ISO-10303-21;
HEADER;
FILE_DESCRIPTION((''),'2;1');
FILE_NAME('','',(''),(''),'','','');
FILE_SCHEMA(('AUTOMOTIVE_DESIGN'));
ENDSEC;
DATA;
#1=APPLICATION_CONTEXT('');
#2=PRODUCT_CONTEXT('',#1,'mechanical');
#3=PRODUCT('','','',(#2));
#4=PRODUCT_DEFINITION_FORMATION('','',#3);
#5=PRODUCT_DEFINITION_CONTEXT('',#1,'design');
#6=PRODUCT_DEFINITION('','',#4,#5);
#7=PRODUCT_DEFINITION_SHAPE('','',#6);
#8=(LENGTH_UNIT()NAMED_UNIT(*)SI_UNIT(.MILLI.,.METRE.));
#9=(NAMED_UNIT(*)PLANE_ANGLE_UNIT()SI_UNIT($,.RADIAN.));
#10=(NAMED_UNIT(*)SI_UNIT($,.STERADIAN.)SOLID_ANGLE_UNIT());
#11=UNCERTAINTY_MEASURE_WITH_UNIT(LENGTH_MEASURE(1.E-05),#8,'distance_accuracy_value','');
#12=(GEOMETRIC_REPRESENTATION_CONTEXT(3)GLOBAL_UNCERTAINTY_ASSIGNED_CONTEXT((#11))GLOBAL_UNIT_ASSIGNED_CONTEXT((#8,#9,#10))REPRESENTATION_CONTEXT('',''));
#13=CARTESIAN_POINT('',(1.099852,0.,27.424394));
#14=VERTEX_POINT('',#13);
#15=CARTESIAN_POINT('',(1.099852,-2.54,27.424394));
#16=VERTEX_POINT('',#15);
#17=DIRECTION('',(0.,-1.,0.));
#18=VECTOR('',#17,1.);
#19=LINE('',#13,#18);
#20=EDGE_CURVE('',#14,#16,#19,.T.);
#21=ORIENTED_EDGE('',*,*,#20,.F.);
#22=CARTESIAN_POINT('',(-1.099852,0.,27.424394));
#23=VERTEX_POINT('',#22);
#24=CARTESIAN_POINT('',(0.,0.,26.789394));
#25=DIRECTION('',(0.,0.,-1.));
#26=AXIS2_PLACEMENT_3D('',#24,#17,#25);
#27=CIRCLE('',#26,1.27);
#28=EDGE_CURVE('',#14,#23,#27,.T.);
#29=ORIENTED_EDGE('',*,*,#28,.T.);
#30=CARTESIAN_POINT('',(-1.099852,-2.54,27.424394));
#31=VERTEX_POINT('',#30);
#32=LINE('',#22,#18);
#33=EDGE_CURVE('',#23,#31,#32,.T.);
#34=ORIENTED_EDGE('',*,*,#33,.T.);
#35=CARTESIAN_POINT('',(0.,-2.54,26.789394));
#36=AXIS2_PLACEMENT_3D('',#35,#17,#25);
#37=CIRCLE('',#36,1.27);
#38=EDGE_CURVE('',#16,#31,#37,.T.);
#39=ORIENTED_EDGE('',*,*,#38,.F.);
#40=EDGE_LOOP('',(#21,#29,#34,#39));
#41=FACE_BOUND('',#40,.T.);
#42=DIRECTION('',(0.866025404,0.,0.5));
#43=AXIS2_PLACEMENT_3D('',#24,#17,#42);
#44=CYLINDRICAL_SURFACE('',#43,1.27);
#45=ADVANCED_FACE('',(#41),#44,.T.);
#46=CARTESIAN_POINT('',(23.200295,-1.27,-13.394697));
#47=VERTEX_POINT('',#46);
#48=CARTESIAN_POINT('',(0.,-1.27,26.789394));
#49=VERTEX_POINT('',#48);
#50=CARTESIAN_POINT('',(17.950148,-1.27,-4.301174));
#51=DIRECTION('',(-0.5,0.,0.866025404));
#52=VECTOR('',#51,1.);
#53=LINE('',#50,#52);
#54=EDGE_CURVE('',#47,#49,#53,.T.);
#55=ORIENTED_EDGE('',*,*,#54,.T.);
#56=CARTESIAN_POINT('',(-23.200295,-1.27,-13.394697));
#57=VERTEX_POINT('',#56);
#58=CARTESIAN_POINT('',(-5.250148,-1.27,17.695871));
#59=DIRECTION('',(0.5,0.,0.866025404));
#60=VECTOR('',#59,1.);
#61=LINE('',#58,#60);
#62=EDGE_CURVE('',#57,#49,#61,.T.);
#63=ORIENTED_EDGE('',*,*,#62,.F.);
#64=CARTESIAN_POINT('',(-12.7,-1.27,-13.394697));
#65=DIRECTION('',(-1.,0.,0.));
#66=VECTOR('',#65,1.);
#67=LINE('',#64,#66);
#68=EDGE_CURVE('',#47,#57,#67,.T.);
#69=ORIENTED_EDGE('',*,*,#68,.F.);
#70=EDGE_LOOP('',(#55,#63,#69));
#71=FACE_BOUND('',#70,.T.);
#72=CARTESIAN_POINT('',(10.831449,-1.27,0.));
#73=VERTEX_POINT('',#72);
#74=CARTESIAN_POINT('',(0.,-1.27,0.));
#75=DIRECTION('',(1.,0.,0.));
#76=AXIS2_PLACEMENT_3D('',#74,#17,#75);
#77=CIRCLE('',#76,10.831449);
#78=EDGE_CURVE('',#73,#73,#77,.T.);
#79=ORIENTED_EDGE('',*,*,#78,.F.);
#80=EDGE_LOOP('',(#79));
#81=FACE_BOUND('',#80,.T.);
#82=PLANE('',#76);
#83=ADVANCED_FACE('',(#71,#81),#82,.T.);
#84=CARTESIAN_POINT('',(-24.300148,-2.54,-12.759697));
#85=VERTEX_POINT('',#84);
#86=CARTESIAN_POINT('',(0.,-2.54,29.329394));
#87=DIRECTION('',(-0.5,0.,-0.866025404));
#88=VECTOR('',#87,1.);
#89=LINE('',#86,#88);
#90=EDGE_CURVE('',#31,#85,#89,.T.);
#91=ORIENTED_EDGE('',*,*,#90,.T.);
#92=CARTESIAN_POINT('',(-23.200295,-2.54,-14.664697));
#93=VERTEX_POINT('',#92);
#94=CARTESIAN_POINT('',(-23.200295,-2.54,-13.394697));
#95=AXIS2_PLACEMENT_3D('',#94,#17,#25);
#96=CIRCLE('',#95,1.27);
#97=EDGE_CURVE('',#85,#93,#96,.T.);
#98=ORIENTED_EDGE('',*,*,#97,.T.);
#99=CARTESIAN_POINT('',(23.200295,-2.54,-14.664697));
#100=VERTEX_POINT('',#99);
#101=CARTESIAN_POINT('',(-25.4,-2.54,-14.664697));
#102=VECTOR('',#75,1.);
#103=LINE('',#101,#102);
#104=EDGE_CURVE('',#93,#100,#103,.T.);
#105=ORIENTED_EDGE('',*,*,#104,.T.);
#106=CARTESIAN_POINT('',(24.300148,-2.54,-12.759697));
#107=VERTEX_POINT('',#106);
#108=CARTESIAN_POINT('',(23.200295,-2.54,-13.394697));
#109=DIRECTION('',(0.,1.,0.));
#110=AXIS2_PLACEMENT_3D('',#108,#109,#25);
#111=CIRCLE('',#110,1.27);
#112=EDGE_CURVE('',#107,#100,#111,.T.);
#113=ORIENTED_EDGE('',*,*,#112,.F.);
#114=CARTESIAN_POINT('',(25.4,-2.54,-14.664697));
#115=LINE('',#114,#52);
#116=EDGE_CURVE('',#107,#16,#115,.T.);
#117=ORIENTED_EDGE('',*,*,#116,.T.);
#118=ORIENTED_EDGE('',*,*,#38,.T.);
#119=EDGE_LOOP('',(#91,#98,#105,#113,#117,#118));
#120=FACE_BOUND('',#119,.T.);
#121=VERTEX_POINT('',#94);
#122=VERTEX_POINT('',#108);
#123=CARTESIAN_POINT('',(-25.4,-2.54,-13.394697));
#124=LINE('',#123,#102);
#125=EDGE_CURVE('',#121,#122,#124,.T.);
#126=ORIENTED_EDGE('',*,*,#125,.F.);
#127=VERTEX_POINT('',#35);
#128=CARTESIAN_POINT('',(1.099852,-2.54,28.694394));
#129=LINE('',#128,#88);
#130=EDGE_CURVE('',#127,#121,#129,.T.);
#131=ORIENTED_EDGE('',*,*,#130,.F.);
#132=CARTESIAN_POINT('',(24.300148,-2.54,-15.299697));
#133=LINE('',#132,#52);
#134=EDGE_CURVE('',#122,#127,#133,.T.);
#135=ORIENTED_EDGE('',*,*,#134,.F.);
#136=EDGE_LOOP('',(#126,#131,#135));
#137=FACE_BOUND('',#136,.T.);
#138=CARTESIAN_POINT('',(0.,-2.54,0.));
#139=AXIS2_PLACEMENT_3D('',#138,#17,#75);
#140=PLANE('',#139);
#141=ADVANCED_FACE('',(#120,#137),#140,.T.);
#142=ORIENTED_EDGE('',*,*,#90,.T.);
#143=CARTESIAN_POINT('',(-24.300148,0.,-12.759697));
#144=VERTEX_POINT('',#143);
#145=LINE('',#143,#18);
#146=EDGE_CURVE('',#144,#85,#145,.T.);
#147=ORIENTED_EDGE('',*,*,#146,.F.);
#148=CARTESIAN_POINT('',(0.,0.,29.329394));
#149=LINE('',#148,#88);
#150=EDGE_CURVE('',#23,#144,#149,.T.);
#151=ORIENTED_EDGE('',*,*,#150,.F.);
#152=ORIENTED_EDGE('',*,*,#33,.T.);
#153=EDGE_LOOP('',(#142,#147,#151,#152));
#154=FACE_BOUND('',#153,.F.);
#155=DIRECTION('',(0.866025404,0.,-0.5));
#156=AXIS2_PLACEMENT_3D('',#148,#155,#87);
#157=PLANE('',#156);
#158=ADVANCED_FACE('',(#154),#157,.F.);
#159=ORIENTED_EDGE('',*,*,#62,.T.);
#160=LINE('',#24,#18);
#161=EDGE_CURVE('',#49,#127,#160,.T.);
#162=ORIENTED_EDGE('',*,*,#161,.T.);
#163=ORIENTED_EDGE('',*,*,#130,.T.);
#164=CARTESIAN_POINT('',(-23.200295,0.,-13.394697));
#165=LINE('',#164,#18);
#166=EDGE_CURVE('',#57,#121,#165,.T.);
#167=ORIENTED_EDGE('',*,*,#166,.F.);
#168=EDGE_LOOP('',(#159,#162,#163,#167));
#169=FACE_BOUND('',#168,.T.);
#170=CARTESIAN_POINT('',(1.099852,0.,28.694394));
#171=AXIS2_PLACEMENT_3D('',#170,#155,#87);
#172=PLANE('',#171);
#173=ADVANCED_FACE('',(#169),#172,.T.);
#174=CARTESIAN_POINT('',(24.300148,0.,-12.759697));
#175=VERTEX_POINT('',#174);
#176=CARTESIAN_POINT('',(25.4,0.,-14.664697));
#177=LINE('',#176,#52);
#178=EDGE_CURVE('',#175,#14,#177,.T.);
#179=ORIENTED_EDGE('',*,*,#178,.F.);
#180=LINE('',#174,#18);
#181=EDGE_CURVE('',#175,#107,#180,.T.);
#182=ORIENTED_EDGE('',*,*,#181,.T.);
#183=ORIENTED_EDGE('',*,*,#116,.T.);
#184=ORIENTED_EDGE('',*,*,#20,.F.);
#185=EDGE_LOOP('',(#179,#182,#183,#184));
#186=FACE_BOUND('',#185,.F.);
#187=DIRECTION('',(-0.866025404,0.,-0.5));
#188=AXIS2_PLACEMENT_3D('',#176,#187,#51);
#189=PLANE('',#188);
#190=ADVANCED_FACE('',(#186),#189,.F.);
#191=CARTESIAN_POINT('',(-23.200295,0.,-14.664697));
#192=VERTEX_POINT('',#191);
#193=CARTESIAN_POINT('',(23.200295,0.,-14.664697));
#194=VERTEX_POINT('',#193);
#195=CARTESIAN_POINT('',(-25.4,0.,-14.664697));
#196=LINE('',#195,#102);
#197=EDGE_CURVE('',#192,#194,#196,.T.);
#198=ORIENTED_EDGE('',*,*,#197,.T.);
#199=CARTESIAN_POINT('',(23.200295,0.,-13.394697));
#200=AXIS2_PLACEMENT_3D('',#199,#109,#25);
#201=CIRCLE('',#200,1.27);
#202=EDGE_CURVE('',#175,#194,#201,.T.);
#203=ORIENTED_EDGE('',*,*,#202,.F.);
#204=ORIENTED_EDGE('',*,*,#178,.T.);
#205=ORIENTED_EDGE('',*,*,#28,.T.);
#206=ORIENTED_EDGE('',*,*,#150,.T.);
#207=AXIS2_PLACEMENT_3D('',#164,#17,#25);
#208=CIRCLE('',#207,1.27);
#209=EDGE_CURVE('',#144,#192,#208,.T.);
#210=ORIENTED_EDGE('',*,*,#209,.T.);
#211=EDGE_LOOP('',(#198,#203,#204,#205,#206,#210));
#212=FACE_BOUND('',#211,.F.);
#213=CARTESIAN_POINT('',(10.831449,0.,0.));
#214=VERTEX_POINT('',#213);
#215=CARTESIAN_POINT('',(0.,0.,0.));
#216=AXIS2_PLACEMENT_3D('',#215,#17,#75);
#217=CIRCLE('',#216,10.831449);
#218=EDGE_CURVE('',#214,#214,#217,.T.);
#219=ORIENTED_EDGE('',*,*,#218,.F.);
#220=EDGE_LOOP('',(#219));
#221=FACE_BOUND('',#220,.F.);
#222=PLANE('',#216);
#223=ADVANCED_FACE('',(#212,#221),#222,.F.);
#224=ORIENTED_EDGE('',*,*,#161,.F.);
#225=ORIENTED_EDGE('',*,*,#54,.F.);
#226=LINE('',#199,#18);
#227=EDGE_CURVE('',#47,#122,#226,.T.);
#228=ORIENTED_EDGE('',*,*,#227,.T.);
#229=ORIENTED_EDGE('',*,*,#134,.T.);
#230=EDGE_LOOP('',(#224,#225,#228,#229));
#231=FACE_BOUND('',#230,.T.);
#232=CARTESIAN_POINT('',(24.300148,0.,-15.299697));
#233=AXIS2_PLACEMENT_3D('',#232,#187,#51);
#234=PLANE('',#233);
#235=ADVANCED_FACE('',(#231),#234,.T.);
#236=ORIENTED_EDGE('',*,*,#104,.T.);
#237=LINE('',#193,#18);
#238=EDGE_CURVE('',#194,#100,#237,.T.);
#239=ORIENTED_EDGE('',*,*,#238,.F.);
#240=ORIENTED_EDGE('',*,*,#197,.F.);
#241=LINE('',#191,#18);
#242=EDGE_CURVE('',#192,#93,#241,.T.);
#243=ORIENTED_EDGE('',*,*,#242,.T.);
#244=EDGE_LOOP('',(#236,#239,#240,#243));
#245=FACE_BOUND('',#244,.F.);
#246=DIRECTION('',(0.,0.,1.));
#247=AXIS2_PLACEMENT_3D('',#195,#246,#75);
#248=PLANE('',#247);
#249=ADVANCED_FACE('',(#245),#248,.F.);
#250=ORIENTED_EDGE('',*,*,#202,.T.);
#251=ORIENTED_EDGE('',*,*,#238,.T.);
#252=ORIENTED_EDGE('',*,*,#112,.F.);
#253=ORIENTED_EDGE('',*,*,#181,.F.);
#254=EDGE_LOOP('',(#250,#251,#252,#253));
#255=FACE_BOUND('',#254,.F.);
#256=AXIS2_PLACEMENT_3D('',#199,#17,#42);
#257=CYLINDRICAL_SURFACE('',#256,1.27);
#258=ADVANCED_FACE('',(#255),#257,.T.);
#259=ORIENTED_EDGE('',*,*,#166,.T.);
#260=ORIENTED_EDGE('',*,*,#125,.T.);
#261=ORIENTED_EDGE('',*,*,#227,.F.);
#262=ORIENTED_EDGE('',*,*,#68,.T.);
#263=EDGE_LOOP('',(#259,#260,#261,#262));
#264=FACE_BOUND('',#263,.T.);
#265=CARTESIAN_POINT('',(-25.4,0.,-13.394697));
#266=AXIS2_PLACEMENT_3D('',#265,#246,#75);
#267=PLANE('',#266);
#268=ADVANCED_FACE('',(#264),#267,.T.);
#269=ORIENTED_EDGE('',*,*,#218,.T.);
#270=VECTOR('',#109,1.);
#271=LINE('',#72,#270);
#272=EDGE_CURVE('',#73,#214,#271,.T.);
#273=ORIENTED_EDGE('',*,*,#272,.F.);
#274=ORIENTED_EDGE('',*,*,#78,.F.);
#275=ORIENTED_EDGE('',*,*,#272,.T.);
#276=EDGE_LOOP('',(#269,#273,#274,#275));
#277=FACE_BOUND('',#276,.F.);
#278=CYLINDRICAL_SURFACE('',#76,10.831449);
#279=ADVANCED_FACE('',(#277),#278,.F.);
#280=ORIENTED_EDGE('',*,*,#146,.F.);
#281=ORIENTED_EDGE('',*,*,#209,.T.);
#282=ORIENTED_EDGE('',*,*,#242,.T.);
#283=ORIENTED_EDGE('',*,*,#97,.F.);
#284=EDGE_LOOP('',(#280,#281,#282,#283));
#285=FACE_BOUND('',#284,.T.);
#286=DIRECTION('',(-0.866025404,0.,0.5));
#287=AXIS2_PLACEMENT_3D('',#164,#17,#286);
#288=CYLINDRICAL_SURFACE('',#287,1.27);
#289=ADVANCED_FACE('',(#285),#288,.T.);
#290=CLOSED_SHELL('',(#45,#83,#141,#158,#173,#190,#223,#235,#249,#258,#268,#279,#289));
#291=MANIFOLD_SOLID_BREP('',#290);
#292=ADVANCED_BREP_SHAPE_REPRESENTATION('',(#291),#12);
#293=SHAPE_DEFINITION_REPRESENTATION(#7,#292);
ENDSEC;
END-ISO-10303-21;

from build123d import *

# Parameters (mm, degrees)
F1_DEPTH = 2.54
F2_R     = 1.27
F3_T     = 1.27
F4_R     = 10.8314490516
F5_DEPTH = 1.271


# Not quite as in the source:
# - a shell that OpenCascade refuses in one call is made with other operations: the cavity is built on its own and cut out


with BuildPart() as f1:
    # F0 (on Front) → F1 (new body)
    with BuildSketch(Plane.XZ):
        Polygon((25.4, -14.6646968374), (0, 29.3293936748), (-25.4, -14.6646968374), align=None)
    extrude(amount=F1_DEPTH)

    # F2
    f2_edges = [f1.edges().sort_by_distance(p)[0] for p in [
        (-25.4, -1.27, -14.664697),
        (25.4, -1.27, -14.664697),
        (0, -1.27, 29.329394),
    ]]
    fillet(f2_edges, radius=F2_R)

    # F3: shell of thickness 1.27, made by hand


with BuildPart() as f3_core1:
    # F3_t2: copy of F1
    add(f1.part)

    # the walls: a layer under each face that stays
    f3_faces = [f3_core1.faces().sort_by_distance(p)[0] for p in [
        (12.7, -1.27, 7.3323484187),
        (0, 0, 6.6973484187),
        (0, -1.27, -14.6646968374),
        (-12.7, -1.27, 7.3323484187),
    ]]
    thicken(f3_faces, amount=-F3_T, mode=Mode.SUBTRACT)


with BuildPart() as f1_1:
    add(f1.part)

    # what is left inside the walls is the cavity
    f3_cavity = [f3_core1.part.solids().sort_by_distance(p)[0] for p in [
        (0, -1.2827, 0),
    ]]
    add(f3_cavity, mode=Mode.SUBTRACT)

    # F4 (on face) → F5 (cut, through all)
    with BuildSketch(Plane.XZ.offset(1.27)):
        Circle(F4_R)
    extrude(amount=-F5_DEPTH, mode=Mode.SUBTRACT)


solid = f1_1.part
